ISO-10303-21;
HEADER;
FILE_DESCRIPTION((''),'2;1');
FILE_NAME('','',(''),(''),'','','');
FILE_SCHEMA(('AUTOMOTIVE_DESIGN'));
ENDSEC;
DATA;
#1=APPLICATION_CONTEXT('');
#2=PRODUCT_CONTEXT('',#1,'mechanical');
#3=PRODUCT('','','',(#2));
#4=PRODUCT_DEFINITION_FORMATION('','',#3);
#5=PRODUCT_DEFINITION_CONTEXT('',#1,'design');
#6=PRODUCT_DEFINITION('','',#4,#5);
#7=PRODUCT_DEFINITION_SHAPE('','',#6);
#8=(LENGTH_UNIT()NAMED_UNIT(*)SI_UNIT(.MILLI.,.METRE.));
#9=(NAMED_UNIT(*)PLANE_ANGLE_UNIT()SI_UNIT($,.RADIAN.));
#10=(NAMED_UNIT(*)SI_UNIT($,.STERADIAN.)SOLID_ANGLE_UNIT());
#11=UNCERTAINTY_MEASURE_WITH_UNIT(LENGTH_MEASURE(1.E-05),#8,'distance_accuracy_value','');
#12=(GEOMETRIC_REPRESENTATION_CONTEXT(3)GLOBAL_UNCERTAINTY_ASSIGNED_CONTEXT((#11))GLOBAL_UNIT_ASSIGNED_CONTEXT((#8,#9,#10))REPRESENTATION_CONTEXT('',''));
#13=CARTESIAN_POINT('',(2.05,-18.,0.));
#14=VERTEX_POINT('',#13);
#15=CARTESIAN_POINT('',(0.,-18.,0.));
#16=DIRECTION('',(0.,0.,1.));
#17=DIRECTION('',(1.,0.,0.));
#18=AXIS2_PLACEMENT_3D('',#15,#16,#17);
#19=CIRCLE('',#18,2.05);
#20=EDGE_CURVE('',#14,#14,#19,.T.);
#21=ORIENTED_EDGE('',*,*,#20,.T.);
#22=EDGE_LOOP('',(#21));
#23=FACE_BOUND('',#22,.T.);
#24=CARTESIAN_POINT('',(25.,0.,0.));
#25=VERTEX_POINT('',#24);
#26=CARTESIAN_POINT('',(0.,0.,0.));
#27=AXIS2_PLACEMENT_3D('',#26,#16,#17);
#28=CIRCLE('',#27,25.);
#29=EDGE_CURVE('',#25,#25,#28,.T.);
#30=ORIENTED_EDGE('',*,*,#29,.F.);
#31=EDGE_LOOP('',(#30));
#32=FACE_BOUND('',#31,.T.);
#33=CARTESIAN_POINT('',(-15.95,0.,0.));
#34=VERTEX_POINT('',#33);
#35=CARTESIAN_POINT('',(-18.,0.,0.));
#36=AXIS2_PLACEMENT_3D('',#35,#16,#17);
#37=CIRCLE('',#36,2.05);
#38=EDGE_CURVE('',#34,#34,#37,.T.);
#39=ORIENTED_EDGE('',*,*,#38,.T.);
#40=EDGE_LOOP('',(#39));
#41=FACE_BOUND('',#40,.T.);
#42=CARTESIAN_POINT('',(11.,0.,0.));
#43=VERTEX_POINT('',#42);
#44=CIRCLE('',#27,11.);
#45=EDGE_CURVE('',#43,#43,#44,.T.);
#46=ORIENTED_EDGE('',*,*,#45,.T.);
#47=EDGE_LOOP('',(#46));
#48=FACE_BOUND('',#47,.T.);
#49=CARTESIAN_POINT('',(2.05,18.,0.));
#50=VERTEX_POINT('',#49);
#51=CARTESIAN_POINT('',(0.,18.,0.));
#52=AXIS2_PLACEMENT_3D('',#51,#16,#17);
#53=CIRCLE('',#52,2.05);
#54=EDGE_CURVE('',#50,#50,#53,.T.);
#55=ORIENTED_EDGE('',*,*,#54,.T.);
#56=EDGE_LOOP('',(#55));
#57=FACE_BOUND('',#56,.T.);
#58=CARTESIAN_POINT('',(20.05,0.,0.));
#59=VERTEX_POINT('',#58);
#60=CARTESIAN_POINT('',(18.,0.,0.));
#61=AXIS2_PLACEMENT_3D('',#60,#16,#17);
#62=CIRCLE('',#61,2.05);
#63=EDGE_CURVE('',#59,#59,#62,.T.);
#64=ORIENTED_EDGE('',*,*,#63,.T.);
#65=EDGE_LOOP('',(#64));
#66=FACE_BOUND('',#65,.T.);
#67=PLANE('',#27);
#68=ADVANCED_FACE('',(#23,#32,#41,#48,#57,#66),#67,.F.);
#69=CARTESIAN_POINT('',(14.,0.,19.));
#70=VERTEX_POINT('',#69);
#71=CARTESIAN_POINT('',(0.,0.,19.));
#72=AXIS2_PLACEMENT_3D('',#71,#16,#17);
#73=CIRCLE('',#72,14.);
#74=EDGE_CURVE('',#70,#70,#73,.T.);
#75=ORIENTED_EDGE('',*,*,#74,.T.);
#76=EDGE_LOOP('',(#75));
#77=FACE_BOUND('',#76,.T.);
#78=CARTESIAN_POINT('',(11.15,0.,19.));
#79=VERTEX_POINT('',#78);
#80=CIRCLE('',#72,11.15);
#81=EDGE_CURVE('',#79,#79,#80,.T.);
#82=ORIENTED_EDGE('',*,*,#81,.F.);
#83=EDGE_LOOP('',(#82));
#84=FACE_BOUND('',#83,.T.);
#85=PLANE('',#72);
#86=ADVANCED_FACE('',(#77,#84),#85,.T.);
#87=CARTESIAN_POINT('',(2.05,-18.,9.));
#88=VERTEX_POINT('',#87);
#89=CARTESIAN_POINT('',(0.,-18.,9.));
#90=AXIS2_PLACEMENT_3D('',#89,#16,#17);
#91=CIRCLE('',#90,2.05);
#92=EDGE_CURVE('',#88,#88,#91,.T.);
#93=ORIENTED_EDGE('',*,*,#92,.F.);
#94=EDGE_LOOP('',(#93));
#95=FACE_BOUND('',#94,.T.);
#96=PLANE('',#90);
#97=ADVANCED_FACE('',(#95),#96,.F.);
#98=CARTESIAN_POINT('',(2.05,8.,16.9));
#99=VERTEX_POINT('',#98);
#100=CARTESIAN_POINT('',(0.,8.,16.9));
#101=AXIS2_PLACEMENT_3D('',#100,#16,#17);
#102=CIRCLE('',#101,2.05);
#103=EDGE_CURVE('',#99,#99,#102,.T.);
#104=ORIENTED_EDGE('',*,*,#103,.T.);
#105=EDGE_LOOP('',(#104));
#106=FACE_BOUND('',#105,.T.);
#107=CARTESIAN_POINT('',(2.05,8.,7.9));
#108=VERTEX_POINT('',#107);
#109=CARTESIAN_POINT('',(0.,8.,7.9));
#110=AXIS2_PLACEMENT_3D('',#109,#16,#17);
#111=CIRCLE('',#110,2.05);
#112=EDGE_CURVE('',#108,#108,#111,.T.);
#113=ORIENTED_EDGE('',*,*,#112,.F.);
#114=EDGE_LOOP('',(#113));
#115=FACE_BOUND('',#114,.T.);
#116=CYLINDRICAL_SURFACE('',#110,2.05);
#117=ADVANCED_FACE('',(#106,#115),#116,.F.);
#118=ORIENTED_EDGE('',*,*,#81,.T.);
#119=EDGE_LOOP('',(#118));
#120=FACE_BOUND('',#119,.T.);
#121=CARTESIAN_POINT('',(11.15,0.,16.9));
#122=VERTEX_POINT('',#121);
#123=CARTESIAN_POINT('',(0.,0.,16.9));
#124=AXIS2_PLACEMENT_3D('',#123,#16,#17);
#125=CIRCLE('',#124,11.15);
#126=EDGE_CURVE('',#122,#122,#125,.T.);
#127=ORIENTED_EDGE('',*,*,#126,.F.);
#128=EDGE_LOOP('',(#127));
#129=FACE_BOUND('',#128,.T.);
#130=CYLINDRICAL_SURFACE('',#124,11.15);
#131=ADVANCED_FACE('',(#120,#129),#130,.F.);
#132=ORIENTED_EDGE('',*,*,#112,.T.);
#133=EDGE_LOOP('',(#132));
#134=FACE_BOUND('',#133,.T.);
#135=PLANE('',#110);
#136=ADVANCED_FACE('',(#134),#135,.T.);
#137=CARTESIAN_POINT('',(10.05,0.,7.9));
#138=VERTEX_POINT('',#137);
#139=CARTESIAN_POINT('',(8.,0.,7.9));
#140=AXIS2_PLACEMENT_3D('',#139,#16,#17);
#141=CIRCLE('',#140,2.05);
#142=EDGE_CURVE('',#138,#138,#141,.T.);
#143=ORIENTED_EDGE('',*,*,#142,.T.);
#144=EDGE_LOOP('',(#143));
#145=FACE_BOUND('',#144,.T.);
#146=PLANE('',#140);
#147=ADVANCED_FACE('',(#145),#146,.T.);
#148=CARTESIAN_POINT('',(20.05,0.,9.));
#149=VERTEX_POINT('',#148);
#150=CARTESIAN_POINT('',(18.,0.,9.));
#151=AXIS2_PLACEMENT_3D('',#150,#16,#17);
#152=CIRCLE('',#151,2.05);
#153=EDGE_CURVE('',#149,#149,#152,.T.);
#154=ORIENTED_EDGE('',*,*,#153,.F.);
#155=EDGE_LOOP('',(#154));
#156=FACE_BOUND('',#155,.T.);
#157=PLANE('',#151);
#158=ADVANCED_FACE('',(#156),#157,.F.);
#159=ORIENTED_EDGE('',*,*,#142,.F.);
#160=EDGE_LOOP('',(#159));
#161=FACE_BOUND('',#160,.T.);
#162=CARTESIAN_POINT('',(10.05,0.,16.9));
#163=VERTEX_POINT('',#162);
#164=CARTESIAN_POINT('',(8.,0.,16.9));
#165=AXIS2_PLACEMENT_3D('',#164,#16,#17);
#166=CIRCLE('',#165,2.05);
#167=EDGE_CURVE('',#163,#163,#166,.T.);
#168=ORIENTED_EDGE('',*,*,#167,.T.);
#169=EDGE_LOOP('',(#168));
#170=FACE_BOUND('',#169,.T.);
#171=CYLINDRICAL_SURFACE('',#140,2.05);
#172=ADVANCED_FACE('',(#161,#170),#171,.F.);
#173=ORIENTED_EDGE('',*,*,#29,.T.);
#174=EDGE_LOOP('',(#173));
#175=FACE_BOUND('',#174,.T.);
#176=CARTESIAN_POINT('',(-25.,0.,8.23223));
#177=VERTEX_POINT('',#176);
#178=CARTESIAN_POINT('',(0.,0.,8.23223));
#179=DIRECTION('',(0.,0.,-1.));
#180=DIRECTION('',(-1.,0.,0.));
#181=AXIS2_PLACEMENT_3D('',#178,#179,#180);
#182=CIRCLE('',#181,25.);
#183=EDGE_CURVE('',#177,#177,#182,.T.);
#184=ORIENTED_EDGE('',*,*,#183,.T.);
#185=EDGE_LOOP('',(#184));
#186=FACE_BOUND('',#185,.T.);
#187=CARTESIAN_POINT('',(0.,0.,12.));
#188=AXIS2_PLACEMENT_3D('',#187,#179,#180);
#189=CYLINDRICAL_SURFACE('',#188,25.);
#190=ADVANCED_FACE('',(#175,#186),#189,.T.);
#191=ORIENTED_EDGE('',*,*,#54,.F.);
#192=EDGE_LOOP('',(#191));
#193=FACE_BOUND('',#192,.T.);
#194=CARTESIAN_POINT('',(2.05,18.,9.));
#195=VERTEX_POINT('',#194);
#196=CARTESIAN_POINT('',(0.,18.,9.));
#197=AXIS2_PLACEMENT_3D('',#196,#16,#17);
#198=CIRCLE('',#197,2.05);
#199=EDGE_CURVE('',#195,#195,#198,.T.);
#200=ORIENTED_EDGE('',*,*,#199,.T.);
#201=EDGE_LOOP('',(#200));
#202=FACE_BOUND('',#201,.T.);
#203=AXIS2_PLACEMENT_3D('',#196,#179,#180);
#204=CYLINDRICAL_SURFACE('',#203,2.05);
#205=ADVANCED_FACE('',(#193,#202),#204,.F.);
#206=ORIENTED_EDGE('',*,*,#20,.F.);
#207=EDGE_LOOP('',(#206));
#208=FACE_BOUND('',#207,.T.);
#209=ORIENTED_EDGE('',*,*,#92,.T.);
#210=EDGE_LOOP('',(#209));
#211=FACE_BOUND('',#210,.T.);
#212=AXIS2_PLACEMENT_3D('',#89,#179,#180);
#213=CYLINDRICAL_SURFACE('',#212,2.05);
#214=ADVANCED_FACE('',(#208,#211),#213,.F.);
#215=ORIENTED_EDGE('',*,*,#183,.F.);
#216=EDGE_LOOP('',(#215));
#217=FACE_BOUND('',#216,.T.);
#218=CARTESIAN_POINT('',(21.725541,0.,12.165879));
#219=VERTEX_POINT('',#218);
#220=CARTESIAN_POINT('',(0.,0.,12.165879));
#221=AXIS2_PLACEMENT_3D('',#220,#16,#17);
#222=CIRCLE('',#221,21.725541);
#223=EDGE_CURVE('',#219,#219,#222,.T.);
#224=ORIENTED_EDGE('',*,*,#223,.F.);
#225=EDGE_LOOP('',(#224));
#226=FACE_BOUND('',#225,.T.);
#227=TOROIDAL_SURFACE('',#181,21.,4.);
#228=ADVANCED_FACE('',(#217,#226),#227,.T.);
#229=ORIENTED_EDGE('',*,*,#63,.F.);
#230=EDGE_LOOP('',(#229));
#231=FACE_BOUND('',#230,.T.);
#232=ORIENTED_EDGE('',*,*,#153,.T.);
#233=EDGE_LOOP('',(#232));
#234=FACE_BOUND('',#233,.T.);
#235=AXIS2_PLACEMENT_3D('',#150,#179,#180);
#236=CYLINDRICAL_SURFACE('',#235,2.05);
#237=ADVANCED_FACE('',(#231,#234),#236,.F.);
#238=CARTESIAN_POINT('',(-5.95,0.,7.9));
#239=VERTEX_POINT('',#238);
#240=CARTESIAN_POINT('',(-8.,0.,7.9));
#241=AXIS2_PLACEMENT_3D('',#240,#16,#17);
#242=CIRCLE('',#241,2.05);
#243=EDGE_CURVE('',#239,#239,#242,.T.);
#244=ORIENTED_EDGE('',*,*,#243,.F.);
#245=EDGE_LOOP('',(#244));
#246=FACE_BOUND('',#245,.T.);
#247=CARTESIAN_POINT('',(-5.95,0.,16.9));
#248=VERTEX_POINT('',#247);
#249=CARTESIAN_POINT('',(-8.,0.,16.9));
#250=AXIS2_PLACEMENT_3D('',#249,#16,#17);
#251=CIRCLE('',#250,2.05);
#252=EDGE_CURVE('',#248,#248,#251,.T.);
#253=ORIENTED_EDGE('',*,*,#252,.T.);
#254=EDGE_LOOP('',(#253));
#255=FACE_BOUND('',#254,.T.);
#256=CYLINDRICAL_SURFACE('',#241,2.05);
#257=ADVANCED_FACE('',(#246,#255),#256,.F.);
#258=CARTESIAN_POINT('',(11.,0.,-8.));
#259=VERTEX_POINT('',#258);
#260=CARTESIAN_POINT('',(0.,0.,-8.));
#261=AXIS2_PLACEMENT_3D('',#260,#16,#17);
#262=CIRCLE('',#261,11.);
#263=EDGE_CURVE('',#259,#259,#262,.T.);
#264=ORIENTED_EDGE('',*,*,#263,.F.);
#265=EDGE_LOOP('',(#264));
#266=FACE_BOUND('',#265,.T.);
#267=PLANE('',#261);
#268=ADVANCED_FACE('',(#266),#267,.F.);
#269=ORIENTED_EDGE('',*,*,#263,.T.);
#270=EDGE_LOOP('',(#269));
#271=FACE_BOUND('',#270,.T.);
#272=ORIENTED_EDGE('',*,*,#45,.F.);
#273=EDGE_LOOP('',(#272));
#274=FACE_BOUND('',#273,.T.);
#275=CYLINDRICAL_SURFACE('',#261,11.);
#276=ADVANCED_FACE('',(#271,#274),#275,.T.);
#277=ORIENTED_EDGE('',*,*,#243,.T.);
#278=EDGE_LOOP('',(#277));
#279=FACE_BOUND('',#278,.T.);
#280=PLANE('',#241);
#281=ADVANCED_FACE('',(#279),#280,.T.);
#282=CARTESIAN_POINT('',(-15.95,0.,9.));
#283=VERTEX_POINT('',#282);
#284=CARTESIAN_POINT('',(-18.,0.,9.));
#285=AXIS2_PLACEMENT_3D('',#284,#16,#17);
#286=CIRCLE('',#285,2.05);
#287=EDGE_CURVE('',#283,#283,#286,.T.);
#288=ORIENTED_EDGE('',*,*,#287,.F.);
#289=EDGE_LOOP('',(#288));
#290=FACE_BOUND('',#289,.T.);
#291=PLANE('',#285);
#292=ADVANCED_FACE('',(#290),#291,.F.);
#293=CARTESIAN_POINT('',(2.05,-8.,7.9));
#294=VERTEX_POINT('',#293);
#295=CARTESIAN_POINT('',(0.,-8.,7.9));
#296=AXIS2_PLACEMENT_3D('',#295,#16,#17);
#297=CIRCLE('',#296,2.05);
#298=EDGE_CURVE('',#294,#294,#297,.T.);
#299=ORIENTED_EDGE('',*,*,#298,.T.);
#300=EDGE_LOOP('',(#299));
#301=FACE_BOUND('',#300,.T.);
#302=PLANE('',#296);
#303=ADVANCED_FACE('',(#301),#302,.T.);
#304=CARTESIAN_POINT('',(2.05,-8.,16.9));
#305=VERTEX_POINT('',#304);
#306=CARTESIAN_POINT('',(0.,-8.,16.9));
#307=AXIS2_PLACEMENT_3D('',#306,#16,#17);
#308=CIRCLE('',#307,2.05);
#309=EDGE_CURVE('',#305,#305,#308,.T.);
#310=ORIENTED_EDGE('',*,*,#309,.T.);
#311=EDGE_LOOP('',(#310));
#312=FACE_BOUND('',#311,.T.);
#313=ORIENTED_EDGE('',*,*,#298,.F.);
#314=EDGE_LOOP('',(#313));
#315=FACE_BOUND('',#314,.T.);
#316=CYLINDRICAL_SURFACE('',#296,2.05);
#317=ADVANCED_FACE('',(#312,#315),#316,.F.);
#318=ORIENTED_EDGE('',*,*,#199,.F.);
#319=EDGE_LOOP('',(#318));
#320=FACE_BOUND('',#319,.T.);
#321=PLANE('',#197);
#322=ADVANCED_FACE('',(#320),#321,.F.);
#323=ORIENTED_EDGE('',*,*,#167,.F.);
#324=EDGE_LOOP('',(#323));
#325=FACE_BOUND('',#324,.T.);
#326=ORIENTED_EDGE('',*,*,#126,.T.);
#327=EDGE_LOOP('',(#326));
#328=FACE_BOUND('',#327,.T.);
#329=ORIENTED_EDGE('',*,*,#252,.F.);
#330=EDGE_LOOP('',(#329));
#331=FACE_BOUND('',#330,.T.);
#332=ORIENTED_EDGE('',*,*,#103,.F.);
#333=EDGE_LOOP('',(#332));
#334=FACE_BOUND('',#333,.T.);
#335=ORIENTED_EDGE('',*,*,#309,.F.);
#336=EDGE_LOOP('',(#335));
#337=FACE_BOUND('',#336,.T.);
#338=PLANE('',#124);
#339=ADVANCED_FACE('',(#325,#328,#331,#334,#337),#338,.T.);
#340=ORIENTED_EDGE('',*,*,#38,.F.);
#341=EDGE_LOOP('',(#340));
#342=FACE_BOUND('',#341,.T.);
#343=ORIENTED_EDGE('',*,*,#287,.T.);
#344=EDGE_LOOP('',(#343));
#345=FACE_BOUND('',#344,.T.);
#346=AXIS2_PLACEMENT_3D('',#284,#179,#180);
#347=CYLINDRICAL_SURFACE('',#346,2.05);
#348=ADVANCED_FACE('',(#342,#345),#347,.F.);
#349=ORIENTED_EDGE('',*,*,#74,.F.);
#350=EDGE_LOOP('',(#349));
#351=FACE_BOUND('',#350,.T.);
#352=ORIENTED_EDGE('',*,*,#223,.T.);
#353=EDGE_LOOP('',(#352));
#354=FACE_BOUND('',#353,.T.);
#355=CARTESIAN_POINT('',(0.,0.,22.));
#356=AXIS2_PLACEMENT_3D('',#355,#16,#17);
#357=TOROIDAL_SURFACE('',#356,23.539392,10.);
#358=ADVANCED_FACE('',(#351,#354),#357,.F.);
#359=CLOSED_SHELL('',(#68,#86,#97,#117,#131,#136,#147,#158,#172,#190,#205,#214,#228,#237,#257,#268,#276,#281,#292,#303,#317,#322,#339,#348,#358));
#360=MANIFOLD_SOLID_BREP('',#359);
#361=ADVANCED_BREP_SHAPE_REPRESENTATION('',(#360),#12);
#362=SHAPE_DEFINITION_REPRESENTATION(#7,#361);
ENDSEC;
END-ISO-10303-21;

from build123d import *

# Parameters (mm, degrees)
SKETCH1_R           = 25
BOSS_EXTRUDE1_DEPTH = 12
BOSS_EXTRUDE2_START = 12
SKETCH2_R           = 14
BOSS_EXTRUDE2_DEPTH = 7
CUT_EXTRUDE1_START  = 19
SKETCH3_R           = 11.15
CUT_EXTRUDE1_DEPTH  = 2.1
FILLET1_R           = 10
FILLET2_R           = 4
SKETCH4_R           = 11
BOSS_EXTRUDE3_DEPTH = 8
CUT_EXTRUDE2_START  = 16.9
SKETCH5_R           = 2.05
CUT_EXTRUDE2_DEPTH  = 9
SKETCH6_R           = 2.05
CUT_EXTRUDE3_DEPTH  = 9


with BuildPart() as part:
    # Sketch1 → Boss-Extrude1 (new body)
    with BuildSketch(Plane.XY):
        Circle(SKETCH1_R)
    extrude(amount=BOSS_EXTRUDE1_DEPTH)

    # Sketch2 → Boss-Extrude2 (add)
    with BuildSketch(Plane.XY.offset(BOSS_EXTRUDE2_START)):
        Circle(SKETCH2_R)
    extrude(amount=BOSS_EXTRUDE2_DEPTH)

    # Sketch3 → Cut-Extrude1 (cut)
    with BuildSketch(Plane.XY.offset(CUT_EXTRUDE1_START)):
        Circle(SKETCH3_R)
    extrude(amount=-CUT_EXTRUDE1_DEPTH, mode=Mode.SUBTRACT)

    # Fillet1
    # the kernel refuses this fillet: 10 mm, written as the material it adds along each edge
    with BuildSketch(Plane(origin=(0, 0, 12), x_dir=(1, 0, 0), z_dir=(0, -1, 0))) as fillet1_piece_1:
        with BuildLine():
            CenterArc((23.539392014, 10), FILLET1_R, 197.457603124, 72.542396876)
            Line((14, 7), (13.80921216, 6.94))
            ThreePointArc((13.80921216, 6.94), (13.8, 3.5), (13.8, 0))
            Line((13.8, 0), (14, -0.2))
            Line((14, -0.2), (23.539392014, -0.2))
            Line((23.539392014, -0.2), (23.539392014, 0))
        make_face()
    revolve(axis=Axis((0, 0, 12), (0, 0, 1)))

    # Fillet2
    fillet2_edges = [part.edges().sort_by_distance(p)[0] for p in [
        (-25, 0, 12),
    ]]
    fillet(fillet2_edges, radius=FILLET2_R)

    # Sketch4 → Boss-Extrude3 (add)
    with BuildSketch(Plane.XY):
        Circle(SKETCH4_R)
    extrude(amount=-BOSS_EXTRUDE3_DEPTH)

    # Sketch5 → Cut-Extrude2 (cut)
    with BuildSketch(Plane.XY.offset(CUT_EXTRUDE2_START)):
        with Locations((0, 8)):
            Circle(SKETCH5_R)
        with Locations((8, 0)):
            Circle(SKETCH5_R)
        with Locations((0, -8)):
            Circle(SKETCH5_R)
        with Locations((-8, 0)):
            Circle(SKETCH5_R)
    extrude(amount=-CUT_EXTRUDE2_DEPTH, mode=Mode.SUBTRACT)

    # Sketch6 → Cut-Extrude3 (cut)
    with BuildSketch(Plane.XY):
        with Locations((0, 18)):
            Circle(SKETCH6_R)
        with Locations((18, 0)):
            Circle(SKETCH6_R)
        with Locations((0, -18)):
            Circle(SKETCH6_R)
        with Locations((-18, 0)):
            Circle(SKETCH6_R)
    extrude(amount=CUT_EXTRUDE3_DEPTH, mode=Mode.SUBTRACT)


solid = part.part
